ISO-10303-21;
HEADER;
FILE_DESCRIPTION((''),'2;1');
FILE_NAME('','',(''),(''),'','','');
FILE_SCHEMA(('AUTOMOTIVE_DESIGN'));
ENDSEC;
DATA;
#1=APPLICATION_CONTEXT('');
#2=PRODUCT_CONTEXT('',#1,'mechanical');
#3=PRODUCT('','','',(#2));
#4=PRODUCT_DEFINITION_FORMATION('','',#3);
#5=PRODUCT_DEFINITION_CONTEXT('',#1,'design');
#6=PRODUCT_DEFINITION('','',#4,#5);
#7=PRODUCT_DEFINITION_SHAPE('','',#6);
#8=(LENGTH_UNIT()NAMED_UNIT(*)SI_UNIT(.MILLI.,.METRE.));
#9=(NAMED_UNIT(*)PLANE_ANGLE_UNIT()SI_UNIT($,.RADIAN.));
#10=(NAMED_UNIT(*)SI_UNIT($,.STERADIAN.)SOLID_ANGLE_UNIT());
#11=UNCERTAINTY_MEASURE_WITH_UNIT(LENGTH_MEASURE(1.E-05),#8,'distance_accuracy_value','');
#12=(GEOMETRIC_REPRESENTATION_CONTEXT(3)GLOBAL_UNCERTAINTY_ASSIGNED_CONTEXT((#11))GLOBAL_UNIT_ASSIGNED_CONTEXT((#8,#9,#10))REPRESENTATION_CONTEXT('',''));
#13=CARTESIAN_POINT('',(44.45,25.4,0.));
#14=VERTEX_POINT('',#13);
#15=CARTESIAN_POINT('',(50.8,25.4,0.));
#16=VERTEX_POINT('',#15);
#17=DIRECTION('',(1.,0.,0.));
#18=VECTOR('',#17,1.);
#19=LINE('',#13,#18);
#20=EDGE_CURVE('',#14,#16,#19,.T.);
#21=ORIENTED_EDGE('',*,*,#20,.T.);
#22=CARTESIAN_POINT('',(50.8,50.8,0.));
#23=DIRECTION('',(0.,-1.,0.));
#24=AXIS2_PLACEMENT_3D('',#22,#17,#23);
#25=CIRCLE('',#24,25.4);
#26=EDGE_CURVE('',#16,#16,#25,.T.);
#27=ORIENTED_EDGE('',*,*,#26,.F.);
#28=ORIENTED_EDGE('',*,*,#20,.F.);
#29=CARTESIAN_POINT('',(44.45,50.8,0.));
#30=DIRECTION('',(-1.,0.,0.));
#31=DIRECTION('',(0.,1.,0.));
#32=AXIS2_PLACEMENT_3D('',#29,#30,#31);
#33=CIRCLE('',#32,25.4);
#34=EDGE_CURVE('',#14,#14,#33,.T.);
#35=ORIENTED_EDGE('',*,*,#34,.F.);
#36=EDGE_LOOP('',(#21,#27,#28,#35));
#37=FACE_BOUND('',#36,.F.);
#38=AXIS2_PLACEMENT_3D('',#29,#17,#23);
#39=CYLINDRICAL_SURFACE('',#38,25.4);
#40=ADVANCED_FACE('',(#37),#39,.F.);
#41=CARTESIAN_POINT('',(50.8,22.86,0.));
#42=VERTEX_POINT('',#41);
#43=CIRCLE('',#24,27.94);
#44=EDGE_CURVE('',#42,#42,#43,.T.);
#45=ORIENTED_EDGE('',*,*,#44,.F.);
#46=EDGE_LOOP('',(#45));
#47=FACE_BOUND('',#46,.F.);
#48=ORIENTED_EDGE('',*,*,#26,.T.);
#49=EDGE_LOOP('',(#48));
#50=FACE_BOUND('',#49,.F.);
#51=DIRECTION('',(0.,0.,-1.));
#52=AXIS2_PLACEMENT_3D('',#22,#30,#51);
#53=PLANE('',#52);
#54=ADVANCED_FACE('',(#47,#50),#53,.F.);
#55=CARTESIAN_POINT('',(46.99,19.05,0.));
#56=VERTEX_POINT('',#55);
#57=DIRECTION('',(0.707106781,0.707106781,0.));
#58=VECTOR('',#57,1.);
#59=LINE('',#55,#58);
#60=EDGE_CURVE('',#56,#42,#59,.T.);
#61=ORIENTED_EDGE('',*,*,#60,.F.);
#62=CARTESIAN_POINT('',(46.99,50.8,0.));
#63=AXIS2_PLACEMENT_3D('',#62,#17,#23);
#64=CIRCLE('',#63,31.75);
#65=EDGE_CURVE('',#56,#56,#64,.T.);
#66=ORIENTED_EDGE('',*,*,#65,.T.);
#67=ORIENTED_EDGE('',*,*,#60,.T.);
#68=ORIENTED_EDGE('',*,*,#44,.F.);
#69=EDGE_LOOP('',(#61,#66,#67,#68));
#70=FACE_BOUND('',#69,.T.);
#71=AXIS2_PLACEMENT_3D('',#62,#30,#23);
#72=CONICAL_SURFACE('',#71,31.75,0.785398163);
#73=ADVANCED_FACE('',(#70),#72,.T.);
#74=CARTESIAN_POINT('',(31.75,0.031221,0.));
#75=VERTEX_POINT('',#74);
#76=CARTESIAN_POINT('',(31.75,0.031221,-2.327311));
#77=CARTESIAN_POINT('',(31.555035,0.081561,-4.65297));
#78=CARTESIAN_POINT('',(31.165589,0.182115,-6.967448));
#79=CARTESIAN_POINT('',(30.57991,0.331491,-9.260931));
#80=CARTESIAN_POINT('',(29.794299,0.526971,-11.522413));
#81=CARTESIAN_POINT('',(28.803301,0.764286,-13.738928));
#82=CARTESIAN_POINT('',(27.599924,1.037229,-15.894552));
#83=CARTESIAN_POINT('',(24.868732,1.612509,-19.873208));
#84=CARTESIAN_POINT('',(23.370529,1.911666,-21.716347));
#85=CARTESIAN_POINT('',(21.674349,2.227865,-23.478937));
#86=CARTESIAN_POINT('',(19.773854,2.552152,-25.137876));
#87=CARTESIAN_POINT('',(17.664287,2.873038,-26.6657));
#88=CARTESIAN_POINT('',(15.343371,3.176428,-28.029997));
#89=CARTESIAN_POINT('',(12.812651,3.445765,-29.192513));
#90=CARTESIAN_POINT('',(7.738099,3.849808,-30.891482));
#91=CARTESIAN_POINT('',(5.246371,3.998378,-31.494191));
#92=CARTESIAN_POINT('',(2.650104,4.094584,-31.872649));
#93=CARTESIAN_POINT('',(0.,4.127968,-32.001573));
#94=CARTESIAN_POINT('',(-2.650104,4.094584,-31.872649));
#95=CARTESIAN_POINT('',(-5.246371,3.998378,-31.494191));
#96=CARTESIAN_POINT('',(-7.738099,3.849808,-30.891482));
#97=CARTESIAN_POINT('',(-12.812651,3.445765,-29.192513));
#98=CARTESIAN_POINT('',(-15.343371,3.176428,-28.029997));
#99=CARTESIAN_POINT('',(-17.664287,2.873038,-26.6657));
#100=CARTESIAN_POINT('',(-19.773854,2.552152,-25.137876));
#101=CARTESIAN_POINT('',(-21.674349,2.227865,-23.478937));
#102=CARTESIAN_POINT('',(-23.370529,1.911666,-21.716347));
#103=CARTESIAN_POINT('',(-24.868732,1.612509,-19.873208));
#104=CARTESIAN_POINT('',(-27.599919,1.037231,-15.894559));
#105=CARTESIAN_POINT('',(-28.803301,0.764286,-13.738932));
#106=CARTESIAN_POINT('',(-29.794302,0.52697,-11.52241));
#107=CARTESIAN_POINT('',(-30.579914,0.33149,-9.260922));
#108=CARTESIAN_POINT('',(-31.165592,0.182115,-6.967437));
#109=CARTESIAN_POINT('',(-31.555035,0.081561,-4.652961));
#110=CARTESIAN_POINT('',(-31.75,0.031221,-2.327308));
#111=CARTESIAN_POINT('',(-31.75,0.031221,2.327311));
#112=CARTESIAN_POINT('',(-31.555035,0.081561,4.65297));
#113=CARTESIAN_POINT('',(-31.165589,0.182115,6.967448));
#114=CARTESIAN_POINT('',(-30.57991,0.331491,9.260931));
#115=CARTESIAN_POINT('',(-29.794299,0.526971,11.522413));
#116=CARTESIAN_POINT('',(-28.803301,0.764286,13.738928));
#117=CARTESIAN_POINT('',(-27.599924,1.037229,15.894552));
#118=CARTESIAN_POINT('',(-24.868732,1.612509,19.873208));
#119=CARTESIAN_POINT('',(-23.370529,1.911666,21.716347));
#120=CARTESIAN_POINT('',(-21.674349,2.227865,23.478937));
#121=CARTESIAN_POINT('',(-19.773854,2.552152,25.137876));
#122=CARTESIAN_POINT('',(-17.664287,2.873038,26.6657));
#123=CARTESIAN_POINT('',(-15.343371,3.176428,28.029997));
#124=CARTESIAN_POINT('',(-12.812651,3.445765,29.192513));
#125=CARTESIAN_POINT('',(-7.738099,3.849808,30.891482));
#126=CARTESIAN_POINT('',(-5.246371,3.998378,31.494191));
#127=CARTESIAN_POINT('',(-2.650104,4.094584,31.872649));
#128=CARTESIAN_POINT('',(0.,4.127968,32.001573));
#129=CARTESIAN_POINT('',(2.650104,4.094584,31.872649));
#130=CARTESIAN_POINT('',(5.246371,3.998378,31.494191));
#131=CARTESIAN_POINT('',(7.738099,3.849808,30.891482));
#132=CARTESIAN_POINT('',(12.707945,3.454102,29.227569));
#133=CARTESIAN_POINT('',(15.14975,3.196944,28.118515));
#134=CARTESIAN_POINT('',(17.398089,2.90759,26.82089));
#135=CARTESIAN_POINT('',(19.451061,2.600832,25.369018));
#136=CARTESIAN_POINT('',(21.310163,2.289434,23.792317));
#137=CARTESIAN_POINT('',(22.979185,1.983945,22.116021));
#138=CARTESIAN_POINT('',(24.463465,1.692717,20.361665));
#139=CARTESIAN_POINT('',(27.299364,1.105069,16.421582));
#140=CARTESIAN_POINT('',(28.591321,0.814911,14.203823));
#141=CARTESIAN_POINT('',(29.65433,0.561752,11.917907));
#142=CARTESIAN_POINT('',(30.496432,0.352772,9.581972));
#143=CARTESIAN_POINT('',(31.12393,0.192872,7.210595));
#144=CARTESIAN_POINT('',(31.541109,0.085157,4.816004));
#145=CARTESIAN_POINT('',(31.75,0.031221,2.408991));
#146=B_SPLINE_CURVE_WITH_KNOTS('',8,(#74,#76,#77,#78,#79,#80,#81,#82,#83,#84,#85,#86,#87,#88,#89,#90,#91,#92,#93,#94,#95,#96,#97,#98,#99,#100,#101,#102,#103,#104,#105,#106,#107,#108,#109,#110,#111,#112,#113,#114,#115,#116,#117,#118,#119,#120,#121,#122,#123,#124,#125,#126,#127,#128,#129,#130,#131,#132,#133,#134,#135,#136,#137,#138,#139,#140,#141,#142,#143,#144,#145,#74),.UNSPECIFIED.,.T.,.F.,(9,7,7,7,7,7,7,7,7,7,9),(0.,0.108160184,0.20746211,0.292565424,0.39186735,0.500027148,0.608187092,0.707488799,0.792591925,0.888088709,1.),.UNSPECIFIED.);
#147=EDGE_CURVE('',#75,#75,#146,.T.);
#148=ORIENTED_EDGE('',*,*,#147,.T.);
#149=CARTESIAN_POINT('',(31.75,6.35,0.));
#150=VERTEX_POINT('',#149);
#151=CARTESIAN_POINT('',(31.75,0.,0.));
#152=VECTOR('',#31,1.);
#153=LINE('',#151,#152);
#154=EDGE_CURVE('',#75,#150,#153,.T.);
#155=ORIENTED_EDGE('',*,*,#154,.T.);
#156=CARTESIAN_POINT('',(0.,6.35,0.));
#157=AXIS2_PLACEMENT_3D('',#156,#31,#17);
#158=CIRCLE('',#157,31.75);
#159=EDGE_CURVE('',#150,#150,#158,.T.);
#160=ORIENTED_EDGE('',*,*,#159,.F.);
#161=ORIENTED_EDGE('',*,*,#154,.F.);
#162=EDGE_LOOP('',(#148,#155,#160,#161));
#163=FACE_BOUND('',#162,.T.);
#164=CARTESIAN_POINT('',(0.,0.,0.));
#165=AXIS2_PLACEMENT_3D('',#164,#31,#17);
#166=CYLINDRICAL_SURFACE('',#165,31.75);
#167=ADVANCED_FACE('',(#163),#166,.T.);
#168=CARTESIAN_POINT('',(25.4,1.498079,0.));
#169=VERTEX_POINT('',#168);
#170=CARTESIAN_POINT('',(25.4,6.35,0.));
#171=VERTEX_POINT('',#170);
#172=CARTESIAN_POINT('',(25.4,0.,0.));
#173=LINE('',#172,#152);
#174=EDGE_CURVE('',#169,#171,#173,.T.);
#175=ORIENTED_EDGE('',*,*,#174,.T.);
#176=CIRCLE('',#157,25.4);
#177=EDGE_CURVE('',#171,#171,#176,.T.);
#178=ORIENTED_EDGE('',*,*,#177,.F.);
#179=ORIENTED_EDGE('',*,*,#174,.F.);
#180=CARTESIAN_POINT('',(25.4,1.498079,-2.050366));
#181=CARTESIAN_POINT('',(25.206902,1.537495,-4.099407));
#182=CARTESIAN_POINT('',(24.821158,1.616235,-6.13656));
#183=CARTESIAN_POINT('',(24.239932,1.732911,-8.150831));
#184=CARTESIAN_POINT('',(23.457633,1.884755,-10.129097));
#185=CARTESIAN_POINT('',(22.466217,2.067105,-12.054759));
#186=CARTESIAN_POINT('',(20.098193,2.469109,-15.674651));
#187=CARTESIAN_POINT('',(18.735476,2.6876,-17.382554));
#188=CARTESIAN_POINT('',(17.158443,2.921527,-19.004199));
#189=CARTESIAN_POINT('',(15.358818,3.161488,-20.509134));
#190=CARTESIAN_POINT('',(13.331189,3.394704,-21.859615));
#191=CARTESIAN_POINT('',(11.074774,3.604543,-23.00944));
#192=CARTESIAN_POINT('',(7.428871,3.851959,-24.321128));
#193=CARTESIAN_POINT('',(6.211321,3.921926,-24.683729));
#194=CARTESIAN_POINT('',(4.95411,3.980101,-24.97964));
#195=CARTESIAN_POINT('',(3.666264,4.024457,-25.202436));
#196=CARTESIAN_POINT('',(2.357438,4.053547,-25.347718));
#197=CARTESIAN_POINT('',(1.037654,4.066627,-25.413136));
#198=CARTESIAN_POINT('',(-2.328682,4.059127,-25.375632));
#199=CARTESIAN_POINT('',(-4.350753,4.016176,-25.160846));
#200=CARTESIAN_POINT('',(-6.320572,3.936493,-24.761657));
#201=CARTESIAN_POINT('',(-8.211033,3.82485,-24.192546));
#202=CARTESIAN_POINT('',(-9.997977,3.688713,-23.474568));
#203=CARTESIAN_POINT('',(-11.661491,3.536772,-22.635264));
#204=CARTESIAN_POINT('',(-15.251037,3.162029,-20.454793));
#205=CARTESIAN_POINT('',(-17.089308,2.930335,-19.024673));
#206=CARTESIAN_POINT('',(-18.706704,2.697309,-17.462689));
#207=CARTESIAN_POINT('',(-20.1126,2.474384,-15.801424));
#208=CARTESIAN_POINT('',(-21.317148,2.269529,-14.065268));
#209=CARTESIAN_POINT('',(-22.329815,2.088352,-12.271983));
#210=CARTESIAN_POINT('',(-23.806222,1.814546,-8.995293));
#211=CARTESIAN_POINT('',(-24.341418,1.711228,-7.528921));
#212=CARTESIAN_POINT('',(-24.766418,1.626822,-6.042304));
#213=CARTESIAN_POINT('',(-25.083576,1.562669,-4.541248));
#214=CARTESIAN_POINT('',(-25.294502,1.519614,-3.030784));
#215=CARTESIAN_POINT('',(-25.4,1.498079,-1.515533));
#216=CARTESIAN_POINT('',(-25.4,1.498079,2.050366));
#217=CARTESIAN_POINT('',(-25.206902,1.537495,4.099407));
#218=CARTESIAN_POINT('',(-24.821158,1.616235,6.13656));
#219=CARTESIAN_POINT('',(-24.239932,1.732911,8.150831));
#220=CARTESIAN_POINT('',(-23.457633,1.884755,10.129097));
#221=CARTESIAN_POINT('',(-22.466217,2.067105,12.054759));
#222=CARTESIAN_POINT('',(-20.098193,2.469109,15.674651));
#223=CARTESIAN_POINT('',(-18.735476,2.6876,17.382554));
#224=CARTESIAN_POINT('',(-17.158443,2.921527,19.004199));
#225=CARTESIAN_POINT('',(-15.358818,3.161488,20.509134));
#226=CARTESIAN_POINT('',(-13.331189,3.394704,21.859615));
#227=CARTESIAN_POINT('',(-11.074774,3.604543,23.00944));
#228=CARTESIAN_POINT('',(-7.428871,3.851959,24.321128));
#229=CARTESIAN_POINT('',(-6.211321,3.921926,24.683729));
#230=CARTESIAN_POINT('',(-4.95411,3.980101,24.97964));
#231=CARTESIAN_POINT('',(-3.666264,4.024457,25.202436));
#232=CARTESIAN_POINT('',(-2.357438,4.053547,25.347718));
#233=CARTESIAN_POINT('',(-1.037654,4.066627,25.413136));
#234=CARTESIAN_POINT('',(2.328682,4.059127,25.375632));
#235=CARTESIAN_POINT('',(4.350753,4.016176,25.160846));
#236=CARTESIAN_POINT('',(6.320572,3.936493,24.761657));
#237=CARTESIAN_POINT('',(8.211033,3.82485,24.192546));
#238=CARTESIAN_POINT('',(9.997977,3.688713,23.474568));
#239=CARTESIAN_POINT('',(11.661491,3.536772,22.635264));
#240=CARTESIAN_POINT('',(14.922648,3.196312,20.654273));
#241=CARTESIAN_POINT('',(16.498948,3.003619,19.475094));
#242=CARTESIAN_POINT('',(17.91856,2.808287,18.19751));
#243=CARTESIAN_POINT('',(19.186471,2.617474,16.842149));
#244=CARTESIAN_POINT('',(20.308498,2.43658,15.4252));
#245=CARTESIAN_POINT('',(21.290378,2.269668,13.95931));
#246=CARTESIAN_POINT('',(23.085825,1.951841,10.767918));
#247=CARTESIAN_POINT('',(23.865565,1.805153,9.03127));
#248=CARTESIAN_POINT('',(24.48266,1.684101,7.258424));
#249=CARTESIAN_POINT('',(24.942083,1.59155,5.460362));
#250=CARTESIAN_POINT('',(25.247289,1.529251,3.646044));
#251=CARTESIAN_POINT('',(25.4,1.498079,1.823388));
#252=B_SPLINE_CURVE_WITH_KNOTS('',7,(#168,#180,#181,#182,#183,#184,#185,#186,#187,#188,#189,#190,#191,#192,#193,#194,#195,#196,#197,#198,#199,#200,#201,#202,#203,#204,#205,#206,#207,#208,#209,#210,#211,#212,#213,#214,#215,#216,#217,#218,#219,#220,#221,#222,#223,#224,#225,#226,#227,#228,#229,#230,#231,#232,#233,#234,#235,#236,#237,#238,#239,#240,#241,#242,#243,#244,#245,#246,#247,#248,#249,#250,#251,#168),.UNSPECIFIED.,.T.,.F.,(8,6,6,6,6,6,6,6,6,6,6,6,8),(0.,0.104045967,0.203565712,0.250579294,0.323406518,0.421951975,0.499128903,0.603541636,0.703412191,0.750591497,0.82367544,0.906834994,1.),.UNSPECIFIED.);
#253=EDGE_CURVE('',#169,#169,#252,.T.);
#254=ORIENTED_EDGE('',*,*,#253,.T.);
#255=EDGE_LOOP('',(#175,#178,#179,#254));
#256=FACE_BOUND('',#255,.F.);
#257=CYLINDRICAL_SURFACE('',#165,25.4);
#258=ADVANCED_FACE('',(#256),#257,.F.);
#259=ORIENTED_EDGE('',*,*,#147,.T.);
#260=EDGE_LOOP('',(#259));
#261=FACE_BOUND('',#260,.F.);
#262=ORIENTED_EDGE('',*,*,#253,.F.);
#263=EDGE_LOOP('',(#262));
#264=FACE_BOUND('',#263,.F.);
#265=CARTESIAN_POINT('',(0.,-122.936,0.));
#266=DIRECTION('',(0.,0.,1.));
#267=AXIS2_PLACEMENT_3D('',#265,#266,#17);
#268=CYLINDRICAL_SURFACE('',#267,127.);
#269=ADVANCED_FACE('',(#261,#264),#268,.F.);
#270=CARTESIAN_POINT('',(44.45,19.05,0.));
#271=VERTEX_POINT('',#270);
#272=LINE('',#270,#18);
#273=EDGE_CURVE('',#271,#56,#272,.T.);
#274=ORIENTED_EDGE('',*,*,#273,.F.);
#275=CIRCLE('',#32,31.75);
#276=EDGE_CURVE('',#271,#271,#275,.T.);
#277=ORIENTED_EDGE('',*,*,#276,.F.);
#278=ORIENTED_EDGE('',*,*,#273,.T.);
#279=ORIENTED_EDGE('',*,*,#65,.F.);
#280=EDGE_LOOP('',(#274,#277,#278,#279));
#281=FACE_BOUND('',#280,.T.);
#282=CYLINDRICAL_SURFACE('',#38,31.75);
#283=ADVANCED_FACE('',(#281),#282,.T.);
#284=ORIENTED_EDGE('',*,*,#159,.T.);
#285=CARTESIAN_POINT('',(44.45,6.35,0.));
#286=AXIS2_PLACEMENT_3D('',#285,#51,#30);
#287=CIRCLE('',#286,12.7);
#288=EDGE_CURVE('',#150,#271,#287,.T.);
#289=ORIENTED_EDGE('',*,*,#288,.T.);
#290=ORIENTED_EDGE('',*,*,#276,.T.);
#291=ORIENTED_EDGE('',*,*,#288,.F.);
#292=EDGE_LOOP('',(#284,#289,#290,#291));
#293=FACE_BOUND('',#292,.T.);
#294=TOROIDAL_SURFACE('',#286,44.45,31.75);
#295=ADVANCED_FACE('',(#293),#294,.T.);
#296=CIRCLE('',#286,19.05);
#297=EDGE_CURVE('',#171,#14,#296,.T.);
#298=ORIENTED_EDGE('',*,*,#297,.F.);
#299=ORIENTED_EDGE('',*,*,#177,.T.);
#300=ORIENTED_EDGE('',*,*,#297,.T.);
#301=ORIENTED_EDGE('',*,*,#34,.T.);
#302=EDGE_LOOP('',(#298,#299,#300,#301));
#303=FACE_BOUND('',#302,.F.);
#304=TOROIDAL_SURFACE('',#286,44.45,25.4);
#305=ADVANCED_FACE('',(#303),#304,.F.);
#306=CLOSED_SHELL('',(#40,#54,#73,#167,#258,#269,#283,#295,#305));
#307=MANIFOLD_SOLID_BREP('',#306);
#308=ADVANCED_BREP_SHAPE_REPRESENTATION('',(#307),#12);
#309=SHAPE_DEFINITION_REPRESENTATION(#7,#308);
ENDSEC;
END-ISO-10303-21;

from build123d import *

# Parameters (mm, degrees)
F1_R     = 31.75
F1_R_2   = 25.399999693
F3_R     = 127
F4_DEPTH = 50.8
F5_SIZE  = 3.81


with BuildPart() as f2:
    # F2: sweep along a path in F0
    with BuildLine(Plane.XY) as f2_path:
        Line((0, 0), (0, 6.35))
        ThreePointArc((0, 6.35), (13.0191035763, 37.7808964237), (44.45, 50.8))
        Line((44.45, 50.8), (50.8, 50.8))
    # F1 (on Front) → F2 (sweep)
    with BuildSketch(Plane.XZ):
        Circle(F1_R)
        Circle(F1_R_2, mode=Mode.SUBTRACT)
    sweep(path=f2_path.line)

    # F3 (on Top) → F4 (cut, symmetric)
    with BuildSketch(Plane.XY):
        with Locations((0, -122.936)):
            Circle(F3_R)
    extrude(amount=F4_DEPTH, both=True, mode=Mode.SUBTRACT)

    # F5
    f5_edges = [f2.edges().sort_by_distance(p)[0] for p in [
        (50.8, 82.55, 0),
    ]]
    chamfer(f5_edges, length=F5_SIZE)


solid = f2.part
